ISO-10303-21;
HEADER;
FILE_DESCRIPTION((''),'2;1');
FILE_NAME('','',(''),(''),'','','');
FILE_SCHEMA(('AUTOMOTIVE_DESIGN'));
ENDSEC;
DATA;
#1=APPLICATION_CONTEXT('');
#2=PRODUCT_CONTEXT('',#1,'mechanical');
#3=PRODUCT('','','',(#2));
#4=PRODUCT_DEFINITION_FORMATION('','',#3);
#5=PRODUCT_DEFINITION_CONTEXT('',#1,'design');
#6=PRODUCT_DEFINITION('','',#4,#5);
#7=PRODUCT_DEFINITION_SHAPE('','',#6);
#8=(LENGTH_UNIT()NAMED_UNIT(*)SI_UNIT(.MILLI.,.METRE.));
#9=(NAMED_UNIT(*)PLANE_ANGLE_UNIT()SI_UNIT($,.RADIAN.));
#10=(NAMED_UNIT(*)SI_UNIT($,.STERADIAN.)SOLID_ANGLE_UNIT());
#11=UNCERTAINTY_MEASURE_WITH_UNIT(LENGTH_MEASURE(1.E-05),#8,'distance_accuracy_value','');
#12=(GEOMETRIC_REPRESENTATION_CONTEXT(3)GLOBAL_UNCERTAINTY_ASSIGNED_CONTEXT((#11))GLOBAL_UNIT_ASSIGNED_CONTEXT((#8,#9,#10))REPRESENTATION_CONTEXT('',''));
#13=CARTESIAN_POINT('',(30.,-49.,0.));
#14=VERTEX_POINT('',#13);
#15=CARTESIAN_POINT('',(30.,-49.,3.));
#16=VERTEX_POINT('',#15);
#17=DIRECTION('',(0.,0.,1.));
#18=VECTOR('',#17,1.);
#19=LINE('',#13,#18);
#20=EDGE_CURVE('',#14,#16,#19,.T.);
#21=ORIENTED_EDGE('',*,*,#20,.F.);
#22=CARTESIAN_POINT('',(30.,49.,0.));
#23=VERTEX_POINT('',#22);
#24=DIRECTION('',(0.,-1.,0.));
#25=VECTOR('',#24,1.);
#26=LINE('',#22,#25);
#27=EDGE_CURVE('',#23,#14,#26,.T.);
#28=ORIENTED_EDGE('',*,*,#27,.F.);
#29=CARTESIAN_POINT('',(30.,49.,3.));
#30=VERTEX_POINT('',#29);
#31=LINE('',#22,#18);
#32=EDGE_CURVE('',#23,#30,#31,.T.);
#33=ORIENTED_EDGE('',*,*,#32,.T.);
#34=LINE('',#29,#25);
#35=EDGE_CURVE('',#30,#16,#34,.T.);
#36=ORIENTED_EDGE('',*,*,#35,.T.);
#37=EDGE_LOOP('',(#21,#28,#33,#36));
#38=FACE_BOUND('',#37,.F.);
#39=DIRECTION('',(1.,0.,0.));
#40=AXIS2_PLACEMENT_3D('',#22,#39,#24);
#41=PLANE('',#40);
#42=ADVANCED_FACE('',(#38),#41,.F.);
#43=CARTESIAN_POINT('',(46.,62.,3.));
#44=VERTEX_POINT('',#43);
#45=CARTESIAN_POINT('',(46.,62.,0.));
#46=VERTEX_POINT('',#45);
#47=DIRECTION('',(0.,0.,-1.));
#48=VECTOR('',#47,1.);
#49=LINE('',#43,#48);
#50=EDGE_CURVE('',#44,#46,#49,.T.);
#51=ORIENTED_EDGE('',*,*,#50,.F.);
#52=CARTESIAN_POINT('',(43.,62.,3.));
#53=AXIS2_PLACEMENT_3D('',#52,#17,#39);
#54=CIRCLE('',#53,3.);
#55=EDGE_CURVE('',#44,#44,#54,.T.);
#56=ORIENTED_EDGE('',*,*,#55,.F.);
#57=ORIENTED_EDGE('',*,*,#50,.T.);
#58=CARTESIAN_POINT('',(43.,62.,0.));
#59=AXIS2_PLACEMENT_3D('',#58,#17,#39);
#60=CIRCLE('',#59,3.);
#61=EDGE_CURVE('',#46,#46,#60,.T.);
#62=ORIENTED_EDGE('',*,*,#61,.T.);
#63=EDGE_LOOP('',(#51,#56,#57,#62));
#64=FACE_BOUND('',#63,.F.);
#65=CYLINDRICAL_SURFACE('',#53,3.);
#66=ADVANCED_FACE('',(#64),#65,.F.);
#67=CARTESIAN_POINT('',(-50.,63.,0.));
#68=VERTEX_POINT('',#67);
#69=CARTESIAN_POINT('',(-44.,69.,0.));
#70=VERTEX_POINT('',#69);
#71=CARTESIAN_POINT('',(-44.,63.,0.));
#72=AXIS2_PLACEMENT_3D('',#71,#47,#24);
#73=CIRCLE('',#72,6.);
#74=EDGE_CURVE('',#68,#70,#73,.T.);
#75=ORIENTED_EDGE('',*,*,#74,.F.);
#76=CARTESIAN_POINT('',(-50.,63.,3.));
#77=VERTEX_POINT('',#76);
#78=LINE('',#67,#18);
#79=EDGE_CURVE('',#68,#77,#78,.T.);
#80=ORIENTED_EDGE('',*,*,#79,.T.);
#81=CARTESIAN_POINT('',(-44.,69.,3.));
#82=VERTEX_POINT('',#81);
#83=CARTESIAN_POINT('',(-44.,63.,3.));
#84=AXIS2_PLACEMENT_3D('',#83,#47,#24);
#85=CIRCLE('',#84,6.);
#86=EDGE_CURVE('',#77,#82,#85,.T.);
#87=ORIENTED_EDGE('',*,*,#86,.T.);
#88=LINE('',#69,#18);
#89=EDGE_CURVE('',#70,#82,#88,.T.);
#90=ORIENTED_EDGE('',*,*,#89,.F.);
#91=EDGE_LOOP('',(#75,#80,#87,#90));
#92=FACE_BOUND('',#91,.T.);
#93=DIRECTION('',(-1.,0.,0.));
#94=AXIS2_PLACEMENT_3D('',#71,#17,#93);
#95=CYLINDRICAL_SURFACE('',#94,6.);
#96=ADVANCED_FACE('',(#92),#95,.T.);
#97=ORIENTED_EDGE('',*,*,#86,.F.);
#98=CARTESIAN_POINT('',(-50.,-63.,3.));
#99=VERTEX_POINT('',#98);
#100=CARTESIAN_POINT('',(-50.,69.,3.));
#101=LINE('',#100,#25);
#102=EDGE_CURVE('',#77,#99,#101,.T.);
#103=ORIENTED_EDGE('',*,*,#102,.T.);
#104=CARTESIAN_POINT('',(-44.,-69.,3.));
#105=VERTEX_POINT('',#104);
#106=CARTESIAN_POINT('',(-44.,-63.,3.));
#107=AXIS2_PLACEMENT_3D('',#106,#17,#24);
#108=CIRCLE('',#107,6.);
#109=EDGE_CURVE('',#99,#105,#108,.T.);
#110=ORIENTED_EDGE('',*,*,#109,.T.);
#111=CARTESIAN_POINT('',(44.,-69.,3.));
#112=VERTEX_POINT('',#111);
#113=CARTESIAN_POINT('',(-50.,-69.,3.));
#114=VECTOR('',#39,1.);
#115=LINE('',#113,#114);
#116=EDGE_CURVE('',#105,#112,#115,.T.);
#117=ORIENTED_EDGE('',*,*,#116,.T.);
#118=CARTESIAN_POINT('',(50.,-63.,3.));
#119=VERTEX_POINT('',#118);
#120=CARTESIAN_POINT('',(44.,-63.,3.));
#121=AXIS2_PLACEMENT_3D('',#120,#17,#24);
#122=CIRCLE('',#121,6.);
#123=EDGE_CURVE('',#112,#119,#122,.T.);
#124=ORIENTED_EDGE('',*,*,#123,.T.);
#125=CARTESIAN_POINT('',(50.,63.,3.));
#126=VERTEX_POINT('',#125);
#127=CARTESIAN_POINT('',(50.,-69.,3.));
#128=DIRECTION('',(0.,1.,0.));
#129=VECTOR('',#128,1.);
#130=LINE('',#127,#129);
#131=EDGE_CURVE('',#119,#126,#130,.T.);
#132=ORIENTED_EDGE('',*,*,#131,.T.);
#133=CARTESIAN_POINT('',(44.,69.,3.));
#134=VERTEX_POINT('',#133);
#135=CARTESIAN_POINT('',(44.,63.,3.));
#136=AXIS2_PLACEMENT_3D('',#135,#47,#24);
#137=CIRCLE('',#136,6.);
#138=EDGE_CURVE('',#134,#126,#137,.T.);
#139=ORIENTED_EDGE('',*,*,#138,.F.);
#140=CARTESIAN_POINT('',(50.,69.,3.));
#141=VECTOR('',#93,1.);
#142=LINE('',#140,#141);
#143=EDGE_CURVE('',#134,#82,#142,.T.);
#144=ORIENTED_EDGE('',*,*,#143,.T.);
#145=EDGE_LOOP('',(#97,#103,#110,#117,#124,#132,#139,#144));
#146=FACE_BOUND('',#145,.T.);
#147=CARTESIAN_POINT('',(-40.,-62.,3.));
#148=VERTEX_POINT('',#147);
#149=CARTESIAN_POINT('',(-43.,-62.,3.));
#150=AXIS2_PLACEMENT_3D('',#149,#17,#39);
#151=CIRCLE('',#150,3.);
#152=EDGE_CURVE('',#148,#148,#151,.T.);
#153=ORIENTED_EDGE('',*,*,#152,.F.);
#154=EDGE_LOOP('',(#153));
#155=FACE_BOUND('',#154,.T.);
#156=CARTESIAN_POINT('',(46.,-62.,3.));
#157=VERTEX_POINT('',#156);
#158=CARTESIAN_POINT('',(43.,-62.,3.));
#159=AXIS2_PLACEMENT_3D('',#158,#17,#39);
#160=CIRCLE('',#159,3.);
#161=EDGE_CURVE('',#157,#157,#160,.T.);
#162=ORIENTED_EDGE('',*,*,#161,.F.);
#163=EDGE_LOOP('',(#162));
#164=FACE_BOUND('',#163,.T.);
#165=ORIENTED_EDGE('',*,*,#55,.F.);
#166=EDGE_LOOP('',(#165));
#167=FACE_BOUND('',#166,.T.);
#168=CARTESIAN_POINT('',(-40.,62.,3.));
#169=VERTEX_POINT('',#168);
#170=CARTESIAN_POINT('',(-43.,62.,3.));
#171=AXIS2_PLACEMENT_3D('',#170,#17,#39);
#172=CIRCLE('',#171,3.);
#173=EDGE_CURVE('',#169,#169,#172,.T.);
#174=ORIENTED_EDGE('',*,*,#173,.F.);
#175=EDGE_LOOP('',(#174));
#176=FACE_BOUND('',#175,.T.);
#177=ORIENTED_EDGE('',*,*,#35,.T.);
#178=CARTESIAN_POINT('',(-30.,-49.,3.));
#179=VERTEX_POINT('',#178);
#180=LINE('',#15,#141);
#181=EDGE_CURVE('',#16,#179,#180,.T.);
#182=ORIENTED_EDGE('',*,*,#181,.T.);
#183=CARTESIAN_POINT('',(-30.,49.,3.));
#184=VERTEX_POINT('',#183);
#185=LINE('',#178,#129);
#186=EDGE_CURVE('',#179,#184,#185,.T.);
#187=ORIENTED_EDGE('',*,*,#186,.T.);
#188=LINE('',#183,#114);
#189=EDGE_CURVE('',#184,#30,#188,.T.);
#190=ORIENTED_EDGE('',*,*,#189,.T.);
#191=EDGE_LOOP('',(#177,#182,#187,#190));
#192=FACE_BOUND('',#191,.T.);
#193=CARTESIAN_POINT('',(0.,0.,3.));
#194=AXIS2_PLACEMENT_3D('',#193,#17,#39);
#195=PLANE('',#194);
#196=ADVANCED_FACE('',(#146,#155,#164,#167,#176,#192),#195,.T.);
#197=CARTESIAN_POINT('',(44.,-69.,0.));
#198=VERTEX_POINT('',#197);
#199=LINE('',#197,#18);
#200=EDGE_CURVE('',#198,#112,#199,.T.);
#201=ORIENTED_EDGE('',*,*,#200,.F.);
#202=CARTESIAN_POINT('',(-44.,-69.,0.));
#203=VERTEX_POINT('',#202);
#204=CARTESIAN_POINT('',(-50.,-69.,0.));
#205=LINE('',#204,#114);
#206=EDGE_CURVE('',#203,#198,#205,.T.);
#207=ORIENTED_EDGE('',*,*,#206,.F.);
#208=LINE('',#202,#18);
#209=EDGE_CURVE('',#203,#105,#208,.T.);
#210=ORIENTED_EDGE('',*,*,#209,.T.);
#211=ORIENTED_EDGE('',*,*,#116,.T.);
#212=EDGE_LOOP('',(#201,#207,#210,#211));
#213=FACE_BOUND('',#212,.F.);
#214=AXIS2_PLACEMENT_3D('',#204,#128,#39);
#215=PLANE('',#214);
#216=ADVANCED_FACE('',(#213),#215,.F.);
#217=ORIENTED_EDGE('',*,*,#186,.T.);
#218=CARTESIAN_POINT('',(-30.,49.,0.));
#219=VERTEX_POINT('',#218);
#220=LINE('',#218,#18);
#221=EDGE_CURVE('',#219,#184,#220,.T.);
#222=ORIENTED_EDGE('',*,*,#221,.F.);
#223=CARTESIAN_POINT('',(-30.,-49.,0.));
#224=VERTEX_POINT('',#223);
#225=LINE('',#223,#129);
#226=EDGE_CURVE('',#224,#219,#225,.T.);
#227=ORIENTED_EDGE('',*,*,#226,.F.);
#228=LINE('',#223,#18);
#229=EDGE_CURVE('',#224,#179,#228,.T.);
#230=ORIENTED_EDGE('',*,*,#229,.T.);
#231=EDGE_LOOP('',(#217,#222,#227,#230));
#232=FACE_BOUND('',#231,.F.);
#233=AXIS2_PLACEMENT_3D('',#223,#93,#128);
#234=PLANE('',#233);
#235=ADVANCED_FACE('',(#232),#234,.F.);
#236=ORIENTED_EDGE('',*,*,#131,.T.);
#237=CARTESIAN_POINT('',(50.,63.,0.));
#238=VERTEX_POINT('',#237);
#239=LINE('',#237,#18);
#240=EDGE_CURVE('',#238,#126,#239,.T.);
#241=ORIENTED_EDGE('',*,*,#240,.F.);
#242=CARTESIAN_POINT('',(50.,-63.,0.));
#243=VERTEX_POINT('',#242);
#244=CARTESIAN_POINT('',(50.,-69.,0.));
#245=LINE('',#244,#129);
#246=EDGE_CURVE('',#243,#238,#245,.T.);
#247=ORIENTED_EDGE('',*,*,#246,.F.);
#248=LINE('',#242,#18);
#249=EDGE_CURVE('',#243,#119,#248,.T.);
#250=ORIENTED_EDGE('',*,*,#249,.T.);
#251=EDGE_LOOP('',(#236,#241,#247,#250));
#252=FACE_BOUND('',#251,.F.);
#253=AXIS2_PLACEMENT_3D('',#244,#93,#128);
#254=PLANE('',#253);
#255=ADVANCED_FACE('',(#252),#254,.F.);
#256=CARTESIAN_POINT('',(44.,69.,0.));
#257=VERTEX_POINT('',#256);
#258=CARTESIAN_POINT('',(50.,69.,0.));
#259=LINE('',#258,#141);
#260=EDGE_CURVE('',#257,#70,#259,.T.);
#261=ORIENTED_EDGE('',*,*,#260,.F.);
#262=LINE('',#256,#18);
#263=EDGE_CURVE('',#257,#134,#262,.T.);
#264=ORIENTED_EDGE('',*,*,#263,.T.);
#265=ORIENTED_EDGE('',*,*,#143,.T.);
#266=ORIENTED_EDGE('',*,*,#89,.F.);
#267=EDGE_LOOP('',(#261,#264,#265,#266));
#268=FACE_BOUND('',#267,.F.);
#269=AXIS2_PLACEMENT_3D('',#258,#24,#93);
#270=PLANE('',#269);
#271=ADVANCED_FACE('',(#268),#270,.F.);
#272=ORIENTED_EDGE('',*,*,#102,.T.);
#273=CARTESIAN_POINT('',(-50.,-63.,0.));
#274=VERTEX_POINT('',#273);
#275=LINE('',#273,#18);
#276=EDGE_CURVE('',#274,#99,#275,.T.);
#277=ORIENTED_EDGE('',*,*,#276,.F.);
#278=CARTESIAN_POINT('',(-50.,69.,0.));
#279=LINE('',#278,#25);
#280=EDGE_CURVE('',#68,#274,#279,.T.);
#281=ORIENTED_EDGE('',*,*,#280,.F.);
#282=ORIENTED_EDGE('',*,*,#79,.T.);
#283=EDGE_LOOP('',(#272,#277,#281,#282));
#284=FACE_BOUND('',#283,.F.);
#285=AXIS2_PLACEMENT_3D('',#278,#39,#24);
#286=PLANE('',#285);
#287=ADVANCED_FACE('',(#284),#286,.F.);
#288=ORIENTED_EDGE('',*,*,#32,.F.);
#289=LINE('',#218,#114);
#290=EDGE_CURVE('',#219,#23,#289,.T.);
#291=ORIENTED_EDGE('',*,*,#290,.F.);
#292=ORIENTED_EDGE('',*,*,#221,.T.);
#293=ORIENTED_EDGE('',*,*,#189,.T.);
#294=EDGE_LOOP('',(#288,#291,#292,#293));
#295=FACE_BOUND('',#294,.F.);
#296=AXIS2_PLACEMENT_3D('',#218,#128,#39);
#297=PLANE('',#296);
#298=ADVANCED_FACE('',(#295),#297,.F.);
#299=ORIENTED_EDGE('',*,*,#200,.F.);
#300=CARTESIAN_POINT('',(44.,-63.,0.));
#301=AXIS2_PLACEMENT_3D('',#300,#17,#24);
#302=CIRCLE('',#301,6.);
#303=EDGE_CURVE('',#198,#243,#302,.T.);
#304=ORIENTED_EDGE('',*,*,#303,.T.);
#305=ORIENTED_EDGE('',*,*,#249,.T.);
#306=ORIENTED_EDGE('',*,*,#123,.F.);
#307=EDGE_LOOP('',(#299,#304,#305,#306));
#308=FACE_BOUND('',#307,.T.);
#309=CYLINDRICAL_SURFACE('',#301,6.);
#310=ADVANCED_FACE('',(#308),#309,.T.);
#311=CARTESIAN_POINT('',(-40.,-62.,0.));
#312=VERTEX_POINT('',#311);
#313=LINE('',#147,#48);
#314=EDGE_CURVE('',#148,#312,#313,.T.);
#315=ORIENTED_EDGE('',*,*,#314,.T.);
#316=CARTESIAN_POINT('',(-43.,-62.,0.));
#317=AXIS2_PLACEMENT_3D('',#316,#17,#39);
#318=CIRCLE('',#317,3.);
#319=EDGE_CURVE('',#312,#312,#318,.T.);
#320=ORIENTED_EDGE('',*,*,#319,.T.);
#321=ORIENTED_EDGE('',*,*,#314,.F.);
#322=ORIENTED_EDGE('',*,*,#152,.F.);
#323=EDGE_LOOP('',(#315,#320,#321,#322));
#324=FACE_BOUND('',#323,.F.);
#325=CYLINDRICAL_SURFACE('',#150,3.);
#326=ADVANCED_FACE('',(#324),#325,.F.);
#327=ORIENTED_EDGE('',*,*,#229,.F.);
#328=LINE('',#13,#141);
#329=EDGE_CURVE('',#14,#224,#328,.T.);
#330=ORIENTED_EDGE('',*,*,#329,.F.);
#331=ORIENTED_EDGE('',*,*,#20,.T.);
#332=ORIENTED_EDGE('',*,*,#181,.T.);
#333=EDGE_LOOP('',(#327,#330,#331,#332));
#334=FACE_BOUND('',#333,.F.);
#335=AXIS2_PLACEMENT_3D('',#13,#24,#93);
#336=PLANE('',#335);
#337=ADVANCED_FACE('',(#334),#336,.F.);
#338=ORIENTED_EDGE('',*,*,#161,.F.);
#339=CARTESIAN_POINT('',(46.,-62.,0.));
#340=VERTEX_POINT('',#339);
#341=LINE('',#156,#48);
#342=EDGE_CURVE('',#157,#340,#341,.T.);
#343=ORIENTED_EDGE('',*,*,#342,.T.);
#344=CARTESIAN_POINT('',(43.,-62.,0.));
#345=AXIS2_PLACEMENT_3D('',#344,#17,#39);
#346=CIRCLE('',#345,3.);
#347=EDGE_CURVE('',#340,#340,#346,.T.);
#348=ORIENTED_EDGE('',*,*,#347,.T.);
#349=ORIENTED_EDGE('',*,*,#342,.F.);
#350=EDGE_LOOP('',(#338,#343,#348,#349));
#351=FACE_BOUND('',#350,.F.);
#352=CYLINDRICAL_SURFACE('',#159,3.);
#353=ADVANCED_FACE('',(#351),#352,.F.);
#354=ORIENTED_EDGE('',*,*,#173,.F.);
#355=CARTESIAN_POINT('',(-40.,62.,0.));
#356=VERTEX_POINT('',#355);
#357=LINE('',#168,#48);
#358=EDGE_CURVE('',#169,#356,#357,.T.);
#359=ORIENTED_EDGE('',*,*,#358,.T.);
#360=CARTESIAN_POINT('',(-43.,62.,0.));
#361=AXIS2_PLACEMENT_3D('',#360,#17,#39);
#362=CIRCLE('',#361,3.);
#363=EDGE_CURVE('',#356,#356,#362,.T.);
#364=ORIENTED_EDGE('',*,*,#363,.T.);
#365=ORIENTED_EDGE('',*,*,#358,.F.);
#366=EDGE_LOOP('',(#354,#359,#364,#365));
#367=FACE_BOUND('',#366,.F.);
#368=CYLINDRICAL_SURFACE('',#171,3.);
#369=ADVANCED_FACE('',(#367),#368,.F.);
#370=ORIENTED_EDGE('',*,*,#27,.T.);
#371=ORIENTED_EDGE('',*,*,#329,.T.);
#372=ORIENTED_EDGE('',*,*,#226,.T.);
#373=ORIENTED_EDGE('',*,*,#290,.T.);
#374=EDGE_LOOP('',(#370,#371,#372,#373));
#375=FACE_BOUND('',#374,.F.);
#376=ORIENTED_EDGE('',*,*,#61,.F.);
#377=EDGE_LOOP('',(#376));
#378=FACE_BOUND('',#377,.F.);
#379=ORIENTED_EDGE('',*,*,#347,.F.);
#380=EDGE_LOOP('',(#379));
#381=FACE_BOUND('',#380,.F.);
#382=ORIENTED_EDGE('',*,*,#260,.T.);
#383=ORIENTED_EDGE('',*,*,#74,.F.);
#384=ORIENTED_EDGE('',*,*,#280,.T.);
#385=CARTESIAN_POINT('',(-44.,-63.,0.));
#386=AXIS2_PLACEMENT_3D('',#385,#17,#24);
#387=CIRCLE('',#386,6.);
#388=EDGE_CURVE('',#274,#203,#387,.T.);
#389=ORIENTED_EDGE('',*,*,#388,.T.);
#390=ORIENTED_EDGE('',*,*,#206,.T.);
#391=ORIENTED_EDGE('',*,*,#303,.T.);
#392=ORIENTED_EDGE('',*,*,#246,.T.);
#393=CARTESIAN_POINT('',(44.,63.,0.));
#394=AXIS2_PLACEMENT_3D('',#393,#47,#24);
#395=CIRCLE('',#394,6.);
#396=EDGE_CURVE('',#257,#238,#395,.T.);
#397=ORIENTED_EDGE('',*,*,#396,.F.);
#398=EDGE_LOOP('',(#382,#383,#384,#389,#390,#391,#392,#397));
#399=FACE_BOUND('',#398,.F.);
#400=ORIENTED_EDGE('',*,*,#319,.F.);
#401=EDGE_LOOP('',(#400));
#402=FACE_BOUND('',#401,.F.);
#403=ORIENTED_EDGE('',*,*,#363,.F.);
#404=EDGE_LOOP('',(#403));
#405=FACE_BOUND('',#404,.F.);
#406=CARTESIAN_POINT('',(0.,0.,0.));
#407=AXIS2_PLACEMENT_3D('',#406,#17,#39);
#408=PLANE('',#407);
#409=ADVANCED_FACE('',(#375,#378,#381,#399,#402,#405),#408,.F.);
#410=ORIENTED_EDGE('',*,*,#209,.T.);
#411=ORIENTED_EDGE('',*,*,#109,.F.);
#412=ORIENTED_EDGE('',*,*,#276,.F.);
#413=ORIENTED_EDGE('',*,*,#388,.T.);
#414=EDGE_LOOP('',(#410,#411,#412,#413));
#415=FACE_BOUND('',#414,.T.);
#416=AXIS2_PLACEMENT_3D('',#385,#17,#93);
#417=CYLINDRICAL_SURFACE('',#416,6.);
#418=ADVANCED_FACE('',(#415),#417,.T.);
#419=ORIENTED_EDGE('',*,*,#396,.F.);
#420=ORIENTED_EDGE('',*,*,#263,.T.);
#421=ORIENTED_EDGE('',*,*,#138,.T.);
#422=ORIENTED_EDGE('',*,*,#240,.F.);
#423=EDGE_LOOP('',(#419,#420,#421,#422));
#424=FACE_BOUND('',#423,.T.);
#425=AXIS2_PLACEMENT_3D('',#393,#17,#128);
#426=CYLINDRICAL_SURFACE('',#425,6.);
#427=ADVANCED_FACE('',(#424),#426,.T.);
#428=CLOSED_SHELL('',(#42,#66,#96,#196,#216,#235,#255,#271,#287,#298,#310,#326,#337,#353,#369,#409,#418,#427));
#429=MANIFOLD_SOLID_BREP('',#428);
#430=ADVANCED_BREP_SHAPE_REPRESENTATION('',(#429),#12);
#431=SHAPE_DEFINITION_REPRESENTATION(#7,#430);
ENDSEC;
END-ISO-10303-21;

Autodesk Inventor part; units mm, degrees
ref_plane "YZ Plane" through (0, 0, 0) normal (1, 0, 0) x (0, 1, 0)
ref_plane "XZ Plane" through (0, 0, 0) normal (0, 1, 0) x (-1, 0, 0)
ref_plane "XY Plane" through (0, 0, 0) normal (0, 0, 1) x (1, 0, 0)
sketch "Sketch1" plane through (0, 0, 0) normal (0, 0, 1) x (1, 0, 0)
  line L0 (-50, -69) -> (50, -69)
  line L1 (50, -69) -> (50, 69)
  line L2 (50, 69) -> (-50, 69)
  line L3 (-50, 69) -> (-50, -69)
  line L4 (-50, -69) -> (50, 69) construction
  line L5 (50, -69) -> (-50, 69) construction
  line L6 (30, -49) -> (-30, -49)
  line L7 (-30, -49) -> (-30, 49)
  line L8 (-30, 49) -> (30, 49)
  line L9 (30, 49) -> (30, -49)
  line L10 (30, -49) -> (-30, 49) construction
  line L11 (-30, -49) -> (30, 49) construction
  point P0 (0, 0)
  dimension "d172" = 60
  dimension "d180" = 20
  dimension "d181" = 20
  dimension "d182" = 98
extrude "Plate5" add sketch "Sketch1" along normal blind 3
sketch "Sketch9" plane through (0, 0, 3) normal (0, 0, 1) x (1, 0, 0)
  circle A0 centre (43, -62) radius 3
  line L0 (43, 62) -> (-43, 62) construction
  line L1 (-43, 62) -> (-43, -62) construction
  line L2 (-43, -62) -> (43, -62) construction
  line L3 (43, -62) -> (43, 62) construction
  line L4 (43, 62) -> (-43, -62) construction
  line L5 (-43, 62) -> (43, -62) construction
  circle A1 centre (-43, -62) radius 3
  circle A2 centre (43, 62) radius 3
  circle A3 centre (-43, 62) radius 3
  line L6 (-30, -49) -> (-30, 49) projected
  line L7 (-30, 49) -> (30, 49) projected
  line L8 (30, 49) -> (30, -49) projected
  line L9 (30, -49) -> (-30, -49) projected
  line L10 (50, -69) -> (-50, -69) projected
  line L11 (50, 69) -> (50, -69) projected
  line L12 (-50, 69) -> (50, 69) projected
  line L13 (-50, -69) -> (-50, 69) projected
  circle A4 centre (-43, 0) radius 3 construction
  circle A5 centre (43, 0) radius 3 construction
  point P0 (0, 0)
  dimension "d174" = 6
  dimension "d183" = 7
  dimension "d184" = 7
extrude "Cut2" cut sketch "Sketch9" against normal blind 3 contours A0 | A1 | A2 | A3
fillet "Corner Round1" radius 6 4 edges at (50, 69, 1.5) (-50, 69, 1.5) (-50, -69, 1.5) (50, -69, 1.5)
properties part number "ANP 1421 FDS Diam way flange 1" material "Stainless Steel"
